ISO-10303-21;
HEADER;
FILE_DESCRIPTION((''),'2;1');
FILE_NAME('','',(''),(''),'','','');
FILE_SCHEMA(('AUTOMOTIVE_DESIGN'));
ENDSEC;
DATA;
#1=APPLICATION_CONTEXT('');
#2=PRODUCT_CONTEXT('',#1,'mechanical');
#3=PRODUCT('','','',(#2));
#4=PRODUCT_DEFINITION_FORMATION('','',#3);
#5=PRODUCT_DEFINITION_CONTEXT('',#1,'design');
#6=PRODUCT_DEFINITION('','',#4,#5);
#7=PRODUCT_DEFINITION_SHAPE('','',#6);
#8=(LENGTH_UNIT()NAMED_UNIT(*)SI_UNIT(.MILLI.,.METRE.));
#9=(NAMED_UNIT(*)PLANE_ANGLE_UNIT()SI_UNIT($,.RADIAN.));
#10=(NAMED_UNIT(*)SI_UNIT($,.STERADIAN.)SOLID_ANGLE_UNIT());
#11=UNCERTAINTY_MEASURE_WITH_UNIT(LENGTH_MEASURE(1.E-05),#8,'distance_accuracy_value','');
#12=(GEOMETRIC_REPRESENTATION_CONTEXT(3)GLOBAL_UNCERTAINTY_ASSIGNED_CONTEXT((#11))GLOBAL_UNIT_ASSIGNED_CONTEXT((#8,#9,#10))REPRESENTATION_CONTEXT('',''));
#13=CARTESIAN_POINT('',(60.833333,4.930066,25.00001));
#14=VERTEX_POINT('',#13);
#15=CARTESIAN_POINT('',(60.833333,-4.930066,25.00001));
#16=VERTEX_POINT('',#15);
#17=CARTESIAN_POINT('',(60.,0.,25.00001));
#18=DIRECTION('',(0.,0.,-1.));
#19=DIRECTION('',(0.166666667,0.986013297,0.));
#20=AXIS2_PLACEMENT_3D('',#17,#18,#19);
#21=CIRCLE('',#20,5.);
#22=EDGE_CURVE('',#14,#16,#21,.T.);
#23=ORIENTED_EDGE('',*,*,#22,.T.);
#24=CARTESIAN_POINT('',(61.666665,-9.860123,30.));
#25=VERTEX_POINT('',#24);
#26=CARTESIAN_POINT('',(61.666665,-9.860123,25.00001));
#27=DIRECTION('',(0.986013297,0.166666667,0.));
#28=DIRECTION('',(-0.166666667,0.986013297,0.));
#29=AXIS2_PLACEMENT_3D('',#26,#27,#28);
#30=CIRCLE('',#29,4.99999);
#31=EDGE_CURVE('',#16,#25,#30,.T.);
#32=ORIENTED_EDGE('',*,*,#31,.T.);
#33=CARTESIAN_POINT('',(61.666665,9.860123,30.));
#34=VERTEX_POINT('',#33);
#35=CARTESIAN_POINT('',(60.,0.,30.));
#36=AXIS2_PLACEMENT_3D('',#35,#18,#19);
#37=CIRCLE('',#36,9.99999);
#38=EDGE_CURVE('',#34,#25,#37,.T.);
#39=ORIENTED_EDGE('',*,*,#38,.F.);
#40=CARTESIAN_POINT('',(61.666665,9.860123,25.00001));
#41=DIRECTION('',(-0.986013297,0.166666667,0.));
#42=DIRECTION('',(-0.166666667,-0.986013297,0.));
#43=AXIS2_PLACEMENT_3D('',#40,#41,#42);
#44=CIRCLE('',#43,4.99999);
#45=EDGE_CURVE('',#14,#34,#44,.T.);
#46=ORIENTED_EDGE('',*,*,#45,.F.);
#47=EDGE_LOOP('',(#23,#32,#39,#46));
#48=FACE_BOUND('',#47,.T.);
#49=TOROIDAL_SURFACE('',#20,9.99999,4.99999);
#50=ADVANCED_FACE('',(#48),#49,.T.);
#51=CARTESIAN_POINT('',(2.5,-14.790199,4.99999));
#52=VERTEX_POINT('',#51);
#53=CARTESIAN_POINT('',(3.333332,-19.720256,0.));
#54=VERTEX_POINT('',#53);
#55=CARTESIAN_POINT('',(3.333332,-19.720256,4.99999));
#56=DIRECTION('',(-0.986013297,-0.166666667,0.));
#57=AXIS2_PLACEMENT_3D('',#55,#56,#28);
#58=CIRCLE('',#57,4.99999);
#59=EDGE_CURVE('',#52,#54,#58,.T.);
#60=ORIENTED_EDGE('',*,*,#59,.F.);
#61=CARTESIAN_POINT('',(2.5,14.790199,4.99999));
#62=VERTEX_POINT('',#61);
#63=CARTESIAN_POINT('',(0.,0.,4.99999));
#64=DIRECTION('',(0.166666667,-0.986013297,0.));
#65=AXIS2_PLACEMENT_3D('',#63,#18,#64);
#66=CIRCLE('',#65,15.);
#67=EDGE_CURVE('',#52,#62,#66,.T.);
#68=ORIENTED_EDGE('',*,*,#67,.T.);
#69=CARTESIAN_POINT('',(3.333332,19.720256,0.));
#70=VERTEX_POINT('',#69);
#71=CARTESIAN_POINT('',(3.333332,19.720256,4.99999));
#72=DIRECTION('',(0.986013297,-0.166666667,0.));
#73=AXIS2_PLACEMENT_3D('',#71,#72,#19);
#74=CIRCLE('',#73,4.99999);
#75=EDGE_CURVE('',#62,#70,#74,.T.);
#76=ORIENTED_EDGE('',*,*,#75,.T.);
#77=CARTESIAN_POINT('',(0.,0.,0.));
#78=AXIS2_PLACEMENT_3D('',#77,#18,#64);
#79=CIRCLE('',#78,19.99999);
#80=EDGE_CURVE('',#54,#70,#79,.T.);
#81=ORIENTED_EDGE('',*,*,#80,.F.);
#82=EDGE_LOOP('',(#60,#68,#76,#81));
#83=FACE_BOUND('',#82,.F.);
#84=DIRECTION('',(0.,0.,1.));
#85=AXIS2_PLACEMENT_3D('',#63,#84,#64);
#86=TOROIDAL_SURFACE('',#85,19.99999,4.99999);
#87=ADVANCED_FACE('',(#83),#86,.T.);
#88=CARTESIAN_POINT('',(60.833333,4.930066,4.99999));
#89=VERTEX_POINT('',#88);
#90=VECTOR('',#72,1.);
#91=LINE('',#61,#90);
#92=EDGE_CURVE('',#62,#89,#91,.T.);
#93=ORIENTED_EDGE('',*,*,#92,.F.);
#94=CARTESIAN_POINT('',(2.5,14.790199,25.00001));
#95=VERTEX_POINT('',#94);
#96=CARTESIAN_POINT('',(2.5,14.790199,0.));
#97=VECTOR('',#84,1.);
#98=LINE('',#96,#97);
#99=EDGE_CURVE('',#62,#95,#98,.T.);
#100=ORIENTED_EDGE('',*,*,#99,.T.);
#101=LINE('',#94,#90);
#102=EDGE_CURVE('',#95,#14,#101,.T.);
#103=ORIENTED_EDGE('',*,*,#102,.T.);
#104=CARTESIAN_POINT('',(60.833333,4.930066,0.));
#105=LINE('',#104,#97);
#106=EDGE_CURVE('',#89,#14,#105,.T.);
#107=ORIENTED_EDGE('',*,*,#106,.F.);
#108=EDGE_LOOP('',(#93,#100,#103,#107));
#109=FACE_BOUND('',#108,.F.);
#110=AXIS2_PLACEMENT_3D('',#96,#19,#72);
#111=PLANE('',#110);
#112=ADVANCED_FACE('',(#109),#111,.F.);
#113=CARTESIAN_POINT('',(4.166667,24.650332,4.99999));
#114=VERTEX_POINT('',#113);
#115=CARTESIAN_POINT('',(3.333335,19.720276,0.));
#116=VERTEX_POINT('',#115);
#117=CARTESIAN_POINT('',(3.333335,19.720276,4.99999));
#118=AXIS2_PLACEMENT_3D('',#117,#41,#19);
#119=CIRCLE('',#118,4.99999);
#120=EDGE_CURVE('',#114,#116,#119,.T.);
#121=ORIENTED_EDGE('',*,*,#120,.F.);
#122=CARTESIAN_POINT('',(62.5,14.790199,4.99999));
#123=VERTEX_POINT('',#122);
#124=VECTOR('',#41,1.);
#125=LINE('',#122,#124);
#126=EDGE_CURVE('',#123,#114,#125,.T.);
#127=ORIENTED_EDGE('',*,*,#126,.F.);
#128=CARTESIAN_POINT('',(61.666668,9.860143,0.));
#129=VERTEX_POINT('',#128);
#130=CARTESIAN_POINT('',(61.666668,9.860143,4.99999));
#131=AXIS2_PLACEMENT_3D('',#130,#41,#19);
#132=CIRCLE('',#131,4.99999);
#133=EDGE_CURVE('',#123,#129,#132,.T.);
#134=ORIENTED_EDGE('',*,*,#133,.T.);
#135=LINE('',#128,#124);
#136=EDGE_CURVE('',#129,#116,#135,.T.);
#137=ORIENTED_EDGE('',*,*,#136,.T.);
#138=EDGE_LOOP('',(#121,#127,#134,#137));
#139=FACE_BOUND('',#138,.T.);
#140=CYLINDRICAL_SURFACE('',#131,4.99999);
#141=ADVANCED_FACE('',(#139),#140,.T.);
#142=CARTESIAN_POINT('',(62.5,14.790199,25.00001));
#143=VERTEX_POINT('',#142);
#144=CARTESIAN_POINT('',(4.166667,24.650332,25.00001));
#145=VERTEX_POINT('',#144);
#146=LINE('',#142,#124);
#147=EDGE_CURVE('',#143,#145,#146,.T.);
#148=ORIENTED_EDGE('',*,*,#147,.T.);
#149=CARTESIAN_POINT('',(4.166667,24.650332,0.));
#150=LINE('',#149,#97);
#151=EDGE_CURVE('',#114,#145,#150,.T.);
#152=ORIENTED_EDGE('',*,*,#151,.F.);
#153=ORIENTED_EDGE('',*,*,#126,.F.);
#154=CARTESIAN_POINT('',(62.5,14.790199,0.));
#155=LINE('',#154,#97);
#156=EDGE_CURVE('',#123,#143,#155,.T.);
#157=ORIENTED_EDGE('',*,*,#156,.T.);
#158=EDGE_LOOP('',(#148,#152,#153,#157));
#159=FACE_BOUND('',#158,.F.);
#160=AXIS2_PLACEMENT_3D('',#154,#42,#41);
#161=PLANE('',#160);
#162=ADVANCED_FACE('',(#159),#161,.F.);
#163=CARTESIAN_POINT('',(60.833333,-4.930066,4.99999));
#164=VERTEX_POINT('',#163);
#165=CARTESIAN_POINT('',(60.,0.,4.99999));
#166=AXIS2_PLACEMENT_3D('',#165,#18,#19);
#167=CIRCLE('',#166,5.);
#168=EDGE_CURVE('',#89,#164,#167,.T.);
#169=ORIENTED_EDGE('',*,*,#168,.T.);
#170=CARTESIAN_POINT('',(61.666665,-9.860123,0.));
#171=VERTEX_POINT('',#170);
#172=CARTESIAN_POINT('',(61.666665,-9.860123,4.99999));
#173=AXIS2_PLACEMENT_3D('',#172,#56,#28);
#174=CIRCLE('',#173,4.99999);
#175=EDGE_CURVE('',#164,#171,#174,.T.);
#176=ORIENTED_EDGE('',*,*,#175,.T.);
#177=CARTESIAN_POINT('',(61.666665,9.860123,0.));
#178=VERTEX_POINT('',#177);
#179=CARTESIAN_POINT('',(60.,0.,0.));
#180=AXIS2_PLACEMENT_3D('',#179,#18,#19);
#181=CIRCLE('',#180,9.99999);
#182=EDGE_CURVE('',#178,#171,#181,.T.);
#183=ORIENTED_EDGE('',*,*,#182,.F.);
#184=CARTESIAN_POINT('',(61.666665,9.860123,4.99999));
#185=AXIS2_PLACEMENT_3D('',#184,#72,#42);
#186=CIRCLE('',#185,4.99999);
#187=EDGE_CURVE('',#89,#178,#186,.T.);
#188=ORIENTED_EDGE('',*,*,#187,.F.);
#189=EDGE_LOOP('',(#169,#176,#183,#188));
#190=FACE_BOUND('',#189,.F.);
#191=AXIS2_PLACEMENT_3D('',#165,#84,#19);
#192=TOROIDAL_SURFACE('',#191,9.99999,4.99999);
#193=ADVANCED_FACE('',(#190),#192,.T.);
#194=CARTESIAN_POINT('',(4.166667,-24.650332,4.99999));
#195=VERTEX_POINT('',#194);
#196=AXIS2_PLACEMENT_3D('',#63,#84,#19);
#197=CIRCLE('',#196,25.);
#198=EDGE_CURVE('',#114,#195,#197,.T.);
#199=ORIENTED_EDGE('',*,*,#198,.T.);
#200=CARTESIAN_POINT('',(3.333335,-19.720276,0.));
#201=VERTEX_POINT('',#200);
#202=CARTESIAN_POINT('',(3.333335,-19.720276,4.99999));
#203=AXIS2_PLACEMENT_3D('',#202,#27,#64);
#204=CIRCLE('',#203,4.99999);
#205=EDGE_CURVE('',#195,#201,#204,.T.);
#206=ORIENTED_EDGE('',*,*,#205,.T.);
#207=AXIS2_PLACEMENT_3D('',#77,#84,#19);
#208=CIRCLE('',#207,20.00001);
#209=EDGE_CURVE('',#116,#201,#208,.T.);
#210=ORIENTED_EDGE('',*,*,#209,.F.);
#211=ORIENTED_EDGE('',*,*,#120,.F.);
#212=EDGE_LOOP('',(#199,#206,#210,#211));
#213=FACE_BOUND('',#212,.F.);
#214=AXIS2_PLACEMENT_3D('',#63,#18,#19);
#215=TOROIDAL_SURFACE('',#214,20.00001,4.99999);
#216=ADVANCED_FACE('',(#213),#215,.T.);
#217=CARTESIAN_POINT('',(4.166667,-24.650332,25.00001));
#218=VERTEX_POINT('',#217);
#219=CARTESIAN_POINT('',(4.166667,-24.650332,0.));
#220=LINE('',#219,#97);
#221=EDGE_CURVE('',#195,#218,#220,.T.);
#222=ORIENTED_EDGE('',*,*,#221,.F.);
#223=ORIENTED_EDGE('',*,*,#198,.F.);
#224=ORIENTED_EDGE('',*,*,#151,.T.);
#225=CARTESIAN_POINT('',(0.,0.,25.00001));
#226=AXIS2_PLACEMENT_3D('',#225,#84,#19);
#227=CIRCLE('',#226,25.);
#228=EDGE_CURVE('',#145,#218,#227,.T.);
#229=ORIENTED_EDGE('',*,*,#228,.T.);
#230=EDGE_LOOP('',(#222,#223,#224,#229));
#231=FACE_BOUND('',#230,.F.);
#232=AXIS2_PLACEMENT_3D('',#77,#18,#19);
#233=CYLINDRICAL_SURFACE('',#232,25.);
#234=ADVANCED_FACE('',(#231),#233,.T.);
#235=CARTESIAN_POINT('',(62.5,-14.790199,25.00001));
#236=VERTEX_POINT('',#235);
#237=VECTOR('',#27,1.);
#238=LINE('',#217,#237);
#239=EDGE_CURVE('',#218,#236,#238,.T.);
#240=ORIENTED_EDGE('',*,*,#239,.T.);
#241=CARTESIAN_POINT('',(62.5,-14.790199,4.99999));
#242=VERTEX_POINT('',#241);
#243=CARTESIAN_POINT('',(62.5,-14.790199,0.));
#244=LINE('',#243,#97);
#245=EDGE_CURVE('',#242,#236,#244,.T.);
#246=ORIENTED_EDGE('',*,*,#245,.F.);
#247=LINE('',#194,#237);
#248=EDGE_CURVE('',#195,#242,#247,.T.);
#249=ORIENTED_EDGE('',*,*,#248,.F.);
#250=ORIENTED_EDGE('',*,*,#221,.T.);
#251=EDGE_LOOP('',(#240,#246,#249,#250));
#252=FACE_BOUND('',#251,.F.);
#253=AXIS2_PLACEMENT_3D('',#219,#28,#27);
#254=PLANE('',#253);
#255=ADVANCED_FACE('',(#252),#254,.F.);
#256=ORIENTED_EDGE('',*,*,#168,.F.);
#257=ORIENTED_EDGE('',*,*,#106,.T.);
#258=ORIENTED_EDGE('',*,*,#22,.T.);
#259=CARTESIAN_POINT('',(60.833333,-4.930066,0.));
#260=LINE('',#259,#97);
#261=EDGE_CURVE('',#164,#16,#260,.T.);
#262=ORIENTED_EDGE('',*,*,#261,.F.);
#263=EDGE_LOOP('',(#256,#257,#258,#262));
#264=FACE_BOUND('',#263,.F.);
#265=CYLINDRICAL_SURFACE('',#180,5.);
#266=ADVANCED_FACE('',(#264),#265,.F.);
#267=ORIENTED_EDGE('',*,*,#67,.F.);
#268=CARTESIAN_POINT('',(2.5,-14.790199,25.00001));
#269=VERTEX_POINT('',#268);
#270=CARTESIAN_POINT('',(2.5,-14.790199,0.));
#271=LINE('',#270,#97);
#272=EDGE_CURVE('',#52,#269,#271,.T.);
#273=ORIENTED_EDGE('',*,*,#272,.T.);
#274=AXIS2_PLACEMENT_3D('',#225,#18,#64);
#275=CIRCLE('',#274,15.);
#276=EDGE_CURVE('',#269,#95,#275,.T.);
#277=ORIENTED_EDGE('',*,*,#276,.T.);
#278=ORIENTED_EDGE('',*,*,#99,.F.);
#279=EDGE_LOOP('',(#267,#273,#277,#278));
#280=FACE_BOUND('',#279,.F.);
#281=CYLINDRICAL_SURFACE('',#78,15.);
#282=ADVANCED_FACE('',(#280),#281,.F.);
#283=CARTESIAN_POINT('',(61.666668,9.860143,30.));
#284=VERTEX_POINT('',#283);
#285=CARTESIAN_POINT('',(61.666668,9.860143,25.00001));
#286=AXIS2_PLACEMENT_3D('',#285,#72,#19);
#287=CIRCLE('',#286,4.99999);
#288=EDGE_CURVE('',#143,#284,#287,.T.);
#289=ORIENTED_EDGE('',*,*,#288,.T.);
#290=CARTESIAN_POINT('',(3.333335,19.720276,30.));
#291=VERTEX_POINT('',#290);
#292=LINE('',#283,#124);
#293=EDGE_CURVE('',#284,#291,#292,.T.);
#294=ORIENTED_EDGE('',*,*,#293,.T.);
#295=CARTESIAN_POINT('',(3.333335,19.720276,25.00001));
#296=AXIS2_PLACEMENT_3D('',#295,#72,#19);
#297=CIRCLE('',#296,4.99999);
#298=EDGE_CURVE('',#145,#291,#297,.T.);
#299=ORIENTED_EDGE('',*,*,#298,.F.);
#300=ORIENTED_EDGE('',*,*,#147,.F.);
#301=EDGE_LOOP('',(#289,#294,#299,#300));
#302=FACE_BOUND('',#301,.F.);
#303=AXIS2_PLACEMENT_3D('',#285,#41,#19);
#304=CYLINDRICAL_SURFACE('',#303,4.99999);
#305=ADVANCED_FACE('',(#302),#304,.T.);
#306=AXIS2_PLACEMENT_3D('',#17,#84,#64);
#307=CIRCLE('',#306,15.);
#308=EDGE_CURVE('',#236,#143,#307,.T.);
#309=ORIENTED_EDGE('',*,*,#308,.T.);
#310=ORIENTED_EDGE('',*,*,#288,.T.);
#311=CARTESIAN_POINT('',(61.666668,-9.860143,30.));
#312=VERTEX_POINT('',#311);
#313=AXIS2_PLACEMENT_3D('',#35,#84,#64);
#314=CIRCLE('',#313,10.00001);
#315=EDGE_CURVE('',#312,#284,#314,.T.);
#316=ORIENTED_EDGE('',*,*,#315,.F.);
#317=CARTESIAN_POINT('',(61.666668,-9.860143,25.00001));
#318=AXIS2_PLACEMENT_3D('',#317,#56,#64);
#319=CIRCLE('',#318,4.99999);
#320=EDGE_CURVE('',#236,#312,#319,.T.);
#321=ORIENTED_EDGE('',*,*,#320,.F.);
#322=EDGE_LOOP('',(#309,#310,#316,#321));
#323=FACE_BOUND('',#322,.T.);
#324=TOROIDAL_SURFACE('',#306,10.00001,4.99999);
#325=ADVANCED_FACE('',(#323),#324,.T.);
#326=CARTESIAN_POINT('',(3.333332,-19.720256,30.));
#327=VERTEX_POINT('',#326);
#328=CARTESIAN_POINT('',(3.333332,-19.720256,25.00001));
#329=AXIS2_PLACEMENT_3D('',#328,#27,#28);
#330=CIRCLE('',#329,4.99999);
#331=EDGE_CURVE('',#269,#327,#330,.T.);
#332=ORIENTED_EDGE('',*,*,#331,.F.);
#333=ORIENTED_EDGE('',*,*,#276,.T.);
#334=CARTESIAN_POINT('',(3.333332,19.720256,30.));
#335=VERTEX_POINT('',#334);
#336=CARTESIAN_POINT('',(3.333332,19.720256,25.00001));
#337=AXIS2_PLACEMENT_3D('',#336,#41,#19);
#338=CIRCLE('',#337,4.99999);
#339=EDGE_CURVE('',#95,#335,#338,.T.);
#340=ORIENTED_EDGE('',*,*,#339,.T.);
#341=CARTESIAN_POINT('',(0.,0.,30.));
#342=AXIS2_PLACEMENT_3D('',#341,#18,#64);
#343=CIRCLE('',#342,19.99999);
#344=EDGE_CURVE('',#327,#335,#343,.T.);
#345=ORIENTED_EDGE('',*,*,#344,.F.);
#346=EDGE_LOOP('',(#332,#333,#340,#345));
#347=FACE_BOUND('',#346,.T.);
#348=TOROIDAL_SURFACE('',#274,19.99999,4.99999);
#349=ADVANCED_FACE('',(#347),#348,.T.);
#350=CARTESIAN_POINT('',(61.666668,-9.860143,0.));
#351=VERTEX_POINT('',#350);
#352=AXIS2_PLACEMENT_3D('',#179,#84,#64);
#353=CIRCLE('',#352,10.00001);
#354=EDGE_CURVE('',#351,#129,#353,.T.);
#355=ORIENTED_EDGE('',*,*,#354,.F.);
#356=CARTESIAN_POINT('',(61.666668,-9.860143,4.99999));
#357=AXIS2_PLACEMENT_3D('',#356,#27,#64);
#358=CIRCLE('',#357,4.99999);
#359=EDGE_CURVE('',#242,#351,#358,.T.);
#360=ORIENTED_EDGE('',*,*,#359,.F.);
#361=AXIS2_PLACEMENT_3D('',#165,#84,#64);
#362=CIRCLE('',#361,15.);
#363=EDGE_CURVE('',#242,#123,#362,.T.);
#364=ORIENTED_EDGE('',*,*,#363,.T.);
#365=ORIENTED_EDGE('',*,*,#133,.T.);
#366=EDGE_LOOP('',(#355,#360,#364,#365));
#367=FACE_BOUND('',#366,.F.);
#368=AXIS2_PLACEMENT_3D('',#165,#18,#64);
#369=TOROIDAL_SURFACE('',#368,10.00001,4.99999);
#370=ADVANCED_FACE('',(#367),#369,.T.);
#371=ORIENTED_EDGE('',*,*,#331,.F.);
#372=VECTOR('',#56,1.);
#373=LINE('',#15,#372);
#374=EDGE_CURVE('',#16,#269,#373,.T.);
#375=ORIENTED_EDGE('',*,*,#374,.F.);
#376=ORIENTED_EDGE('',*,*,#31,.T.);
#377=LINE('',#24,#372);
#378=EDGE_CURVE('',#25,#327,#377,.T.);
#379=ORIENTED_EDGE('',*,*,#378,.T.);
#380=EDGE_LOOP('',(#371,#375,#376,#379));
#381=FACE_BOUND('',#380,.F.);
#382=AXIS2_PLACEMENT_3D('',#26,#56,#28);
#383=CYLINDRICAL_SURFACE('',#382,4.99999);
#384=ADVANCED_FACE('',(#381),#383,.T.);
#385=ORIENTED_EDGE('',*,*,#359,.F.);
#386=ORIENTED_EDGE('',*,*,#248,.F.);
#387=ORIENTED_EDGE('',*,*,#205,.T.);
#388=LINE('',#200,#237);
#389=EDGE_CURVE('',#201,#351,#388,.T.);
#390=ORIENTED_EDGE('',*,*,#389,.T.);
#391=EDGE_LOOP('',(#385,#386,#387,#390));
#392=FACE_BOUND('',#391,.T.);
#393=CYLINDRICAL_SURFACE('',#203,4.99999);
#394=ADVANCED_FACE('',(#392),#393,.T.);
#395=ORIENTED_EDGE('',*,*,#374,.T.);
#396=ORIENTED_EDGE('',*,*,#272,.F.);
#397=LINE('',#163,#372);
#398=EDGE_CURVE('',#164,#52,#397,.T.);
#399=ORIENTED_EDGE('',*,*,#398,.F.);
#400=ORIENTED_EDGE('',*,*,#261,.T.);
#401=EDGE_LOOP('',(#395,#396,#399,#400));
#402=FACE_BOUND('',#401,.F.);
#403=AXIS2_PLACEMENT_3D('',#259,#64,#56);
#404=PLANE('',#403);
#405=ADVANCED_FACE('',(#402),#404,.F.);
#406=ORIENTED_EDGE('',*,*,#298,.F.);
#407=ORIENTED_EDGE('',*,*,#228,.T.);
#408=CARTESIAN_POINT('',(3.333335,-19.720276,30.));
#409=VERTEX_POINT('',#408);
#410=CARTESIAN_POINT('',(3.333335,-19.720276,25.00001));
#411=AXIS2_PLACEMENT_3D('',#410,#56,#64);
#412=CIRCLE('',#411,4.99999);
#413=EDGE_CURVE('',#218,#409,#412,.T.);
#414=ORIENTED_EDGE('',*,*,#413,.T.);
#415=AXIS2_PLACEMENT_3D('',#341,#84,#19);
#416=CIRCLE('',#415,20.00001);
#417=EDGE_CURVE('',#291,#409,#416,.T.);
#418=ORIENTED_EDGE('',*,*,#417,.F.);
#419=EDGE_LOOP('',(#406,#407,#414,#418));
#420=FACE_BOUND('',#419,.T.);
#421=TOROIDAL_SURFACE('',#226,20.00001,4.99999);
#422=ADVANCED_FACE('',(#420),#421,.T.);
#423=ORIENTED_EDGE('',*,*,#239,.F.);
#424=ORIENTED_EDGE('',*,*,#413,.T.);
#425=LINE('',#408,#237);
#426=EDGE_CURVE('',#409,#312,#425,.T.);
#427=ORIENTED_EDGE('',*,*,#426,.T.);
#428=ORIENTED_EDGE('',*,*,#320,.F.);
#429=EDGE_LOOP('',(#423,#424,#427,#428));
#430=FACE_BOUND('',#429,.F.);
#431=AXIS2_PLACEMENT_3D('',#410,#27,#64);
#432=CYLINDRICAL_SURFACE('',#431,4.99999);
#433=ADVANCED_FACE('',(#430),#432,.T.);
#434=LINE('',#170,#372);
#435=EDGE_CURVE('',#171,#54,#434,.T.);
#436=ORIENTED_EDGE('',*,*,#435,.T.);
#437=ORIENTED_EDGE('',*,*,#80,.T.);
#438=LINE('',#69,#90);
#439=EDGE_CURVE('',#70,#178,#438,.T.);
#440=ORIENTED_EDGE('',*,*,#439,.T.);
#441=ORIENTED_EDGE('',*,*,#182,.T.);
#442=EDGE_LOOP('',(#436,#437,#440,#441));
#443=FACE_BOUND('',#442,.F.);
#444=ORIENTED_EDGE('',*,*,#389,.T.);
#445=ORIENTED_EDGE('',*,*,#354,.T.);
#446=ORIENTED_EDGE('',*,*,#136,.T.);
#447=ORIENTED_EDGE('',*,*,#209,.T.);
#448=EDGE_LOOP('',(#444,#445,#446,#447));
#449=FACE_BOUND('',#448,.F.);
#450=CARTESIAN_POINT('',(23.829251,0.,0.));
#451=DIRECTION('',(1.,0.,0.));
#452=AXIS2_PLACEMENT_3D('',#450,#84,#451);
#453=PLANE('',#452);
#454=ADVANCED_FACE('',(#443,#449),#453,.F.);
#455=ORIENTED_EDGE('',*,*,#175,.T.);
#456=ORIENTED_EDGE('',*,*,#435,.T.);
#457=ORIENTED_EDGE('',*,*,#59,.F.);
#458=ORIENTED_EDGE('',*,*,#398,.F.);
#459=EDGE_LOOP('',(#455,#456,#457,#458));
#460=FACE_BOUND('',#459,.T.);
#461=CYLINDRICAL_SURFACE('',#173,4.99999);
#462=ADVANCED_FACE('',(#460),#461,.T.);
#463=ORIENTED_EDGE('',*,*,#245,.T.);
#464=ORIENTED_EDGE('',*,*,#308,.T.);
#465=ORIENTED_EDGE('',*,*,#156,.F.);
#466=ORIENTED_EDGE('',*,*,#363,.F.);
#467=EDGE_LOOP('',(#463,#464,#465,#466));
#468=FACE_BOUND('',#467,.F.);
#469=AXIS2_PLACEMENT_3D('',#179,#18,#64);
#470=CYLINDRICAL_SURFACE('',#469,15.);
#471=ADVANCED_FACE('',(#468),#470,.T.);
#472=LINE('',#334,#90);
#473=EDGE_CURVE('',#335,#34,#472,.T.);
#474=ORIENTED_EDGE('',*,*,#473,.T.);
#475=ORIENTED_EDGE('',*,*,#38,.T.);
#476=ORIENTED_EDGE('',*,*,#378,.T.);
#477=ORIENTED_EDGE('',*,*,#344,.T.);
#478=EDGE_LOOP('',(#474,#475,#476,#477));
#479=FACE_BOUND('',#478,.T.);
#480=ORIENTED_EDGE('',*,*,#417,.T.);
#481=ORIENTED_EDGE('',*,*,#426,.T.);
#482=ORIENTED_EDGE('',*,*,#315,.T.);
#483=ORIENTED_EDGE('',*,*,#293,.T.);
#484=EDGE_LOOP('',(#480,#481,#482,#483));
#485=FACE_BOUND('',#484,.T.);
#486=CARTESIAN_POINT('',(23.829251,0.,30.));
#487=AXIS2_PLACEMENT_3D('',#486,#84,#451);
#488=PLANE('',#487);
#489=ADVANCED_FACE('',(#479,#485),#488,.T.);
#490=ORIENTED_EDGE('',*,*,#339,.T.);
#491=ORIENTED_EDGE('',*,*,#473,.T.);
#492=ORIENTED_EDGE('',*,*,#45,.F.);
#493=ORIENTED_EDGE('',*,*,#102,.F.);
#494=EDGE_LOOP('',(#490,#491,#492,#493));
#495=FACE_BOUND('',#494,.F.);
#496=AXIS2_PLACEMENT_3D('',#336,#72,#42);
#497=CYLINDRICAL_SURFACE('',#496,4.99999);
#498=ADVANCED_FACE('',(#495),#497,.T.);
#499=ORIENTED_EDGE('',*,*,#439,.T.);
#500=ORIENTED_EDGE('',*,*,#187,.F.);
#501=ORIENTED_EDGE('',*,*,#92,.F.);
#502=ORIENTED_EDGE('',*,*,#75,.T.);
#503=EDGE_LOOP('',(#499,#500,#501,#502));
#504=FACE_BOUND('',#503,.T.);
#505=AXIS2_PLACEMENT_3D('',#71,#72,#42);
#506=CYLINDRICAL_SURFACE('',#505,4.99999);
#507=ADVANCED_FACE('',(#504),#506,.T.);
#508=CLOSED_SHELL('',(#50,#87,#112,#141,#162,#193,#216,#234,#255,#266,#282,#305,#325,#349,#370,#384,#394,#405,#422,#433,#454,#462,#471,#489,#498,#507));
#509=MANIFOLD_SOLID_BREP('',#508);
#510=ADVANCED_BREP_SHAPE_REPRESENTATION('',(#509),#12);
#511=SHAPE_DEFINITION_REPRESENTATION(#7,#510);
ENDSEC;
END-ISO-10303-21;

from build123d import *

# Parameters (mm, degrees)
F1_DEPTH = 30
F2_R     = 4.99999


# Not quite as in the source:
# - a fillet or chamfer is up to 0.001 mm smaller than in the source, because OpenCascade refuses the exact size


with BuildPart() as f1:
    # F0 (on Top) → F1 (new body)
    with BuildSketch(Plane.XY):
        with BuildLine():
            Line((62.5, 14.7901994577), (4.1666666667, 24.6503324296))
            ThreePointArc((4.1666666667, 24.6503324296), (-25, 0), (4.1666666667, -24.6503324296))
            Line((4.1666666667, -24.6503324296), (62.5, -14.7901994577))
            ThreePointArc((62.5, -14.7901994577), (75, 0), (62.5, 14.7901994577))
        make_face()
        with BuildLine():
            Line((60.8333333333, -4.9300664859), (2.5, -14.7901994577))
            ThreePointArc((2.5, -14.7901994577), (-15, 0), (2.5, 14.7901994577))
            Line((2.5, 14.7901994577), (60.8333333333, 4.9300664859))
            ThreePointArc((60.8333333333, 4.9300664859), (65, 0), (60.8333333333, -4.9300664859))
        make_face(mode=Mode.SUBTRACT)
    extrude(amount=F1_DEPTH)

    # F2 (radius 5 in the source; OpenCascade refuses exactly that, so slightly less here)
    f2_edges = [f1.edges().sort_by_distance(p)[0] for p in [
        (33.333333, -19.720266, 30),
        (75, 0, 30),
        (33.333333, 19.720266, 30),
        (-25, 0, 30),
        (31.666667, -9.860133, 30),
        (-15, 0, 30),
        (31.666667, 9.860133, 30),
        (65, 0, 30),
        (33.333333, -19.720266, 0),
        (75, 0, 0),
        (33.333333, 19.720266, 0),
        (-25, 0, 0),
        (31.666667, -9.860133, 0),
        (-15, 0, 0),
        (31.666667, 9.860133, 0),
        (65, 0, 0),
    ]]
    fillet(f2_edges, radius=F2_R)


solid = f1.part
